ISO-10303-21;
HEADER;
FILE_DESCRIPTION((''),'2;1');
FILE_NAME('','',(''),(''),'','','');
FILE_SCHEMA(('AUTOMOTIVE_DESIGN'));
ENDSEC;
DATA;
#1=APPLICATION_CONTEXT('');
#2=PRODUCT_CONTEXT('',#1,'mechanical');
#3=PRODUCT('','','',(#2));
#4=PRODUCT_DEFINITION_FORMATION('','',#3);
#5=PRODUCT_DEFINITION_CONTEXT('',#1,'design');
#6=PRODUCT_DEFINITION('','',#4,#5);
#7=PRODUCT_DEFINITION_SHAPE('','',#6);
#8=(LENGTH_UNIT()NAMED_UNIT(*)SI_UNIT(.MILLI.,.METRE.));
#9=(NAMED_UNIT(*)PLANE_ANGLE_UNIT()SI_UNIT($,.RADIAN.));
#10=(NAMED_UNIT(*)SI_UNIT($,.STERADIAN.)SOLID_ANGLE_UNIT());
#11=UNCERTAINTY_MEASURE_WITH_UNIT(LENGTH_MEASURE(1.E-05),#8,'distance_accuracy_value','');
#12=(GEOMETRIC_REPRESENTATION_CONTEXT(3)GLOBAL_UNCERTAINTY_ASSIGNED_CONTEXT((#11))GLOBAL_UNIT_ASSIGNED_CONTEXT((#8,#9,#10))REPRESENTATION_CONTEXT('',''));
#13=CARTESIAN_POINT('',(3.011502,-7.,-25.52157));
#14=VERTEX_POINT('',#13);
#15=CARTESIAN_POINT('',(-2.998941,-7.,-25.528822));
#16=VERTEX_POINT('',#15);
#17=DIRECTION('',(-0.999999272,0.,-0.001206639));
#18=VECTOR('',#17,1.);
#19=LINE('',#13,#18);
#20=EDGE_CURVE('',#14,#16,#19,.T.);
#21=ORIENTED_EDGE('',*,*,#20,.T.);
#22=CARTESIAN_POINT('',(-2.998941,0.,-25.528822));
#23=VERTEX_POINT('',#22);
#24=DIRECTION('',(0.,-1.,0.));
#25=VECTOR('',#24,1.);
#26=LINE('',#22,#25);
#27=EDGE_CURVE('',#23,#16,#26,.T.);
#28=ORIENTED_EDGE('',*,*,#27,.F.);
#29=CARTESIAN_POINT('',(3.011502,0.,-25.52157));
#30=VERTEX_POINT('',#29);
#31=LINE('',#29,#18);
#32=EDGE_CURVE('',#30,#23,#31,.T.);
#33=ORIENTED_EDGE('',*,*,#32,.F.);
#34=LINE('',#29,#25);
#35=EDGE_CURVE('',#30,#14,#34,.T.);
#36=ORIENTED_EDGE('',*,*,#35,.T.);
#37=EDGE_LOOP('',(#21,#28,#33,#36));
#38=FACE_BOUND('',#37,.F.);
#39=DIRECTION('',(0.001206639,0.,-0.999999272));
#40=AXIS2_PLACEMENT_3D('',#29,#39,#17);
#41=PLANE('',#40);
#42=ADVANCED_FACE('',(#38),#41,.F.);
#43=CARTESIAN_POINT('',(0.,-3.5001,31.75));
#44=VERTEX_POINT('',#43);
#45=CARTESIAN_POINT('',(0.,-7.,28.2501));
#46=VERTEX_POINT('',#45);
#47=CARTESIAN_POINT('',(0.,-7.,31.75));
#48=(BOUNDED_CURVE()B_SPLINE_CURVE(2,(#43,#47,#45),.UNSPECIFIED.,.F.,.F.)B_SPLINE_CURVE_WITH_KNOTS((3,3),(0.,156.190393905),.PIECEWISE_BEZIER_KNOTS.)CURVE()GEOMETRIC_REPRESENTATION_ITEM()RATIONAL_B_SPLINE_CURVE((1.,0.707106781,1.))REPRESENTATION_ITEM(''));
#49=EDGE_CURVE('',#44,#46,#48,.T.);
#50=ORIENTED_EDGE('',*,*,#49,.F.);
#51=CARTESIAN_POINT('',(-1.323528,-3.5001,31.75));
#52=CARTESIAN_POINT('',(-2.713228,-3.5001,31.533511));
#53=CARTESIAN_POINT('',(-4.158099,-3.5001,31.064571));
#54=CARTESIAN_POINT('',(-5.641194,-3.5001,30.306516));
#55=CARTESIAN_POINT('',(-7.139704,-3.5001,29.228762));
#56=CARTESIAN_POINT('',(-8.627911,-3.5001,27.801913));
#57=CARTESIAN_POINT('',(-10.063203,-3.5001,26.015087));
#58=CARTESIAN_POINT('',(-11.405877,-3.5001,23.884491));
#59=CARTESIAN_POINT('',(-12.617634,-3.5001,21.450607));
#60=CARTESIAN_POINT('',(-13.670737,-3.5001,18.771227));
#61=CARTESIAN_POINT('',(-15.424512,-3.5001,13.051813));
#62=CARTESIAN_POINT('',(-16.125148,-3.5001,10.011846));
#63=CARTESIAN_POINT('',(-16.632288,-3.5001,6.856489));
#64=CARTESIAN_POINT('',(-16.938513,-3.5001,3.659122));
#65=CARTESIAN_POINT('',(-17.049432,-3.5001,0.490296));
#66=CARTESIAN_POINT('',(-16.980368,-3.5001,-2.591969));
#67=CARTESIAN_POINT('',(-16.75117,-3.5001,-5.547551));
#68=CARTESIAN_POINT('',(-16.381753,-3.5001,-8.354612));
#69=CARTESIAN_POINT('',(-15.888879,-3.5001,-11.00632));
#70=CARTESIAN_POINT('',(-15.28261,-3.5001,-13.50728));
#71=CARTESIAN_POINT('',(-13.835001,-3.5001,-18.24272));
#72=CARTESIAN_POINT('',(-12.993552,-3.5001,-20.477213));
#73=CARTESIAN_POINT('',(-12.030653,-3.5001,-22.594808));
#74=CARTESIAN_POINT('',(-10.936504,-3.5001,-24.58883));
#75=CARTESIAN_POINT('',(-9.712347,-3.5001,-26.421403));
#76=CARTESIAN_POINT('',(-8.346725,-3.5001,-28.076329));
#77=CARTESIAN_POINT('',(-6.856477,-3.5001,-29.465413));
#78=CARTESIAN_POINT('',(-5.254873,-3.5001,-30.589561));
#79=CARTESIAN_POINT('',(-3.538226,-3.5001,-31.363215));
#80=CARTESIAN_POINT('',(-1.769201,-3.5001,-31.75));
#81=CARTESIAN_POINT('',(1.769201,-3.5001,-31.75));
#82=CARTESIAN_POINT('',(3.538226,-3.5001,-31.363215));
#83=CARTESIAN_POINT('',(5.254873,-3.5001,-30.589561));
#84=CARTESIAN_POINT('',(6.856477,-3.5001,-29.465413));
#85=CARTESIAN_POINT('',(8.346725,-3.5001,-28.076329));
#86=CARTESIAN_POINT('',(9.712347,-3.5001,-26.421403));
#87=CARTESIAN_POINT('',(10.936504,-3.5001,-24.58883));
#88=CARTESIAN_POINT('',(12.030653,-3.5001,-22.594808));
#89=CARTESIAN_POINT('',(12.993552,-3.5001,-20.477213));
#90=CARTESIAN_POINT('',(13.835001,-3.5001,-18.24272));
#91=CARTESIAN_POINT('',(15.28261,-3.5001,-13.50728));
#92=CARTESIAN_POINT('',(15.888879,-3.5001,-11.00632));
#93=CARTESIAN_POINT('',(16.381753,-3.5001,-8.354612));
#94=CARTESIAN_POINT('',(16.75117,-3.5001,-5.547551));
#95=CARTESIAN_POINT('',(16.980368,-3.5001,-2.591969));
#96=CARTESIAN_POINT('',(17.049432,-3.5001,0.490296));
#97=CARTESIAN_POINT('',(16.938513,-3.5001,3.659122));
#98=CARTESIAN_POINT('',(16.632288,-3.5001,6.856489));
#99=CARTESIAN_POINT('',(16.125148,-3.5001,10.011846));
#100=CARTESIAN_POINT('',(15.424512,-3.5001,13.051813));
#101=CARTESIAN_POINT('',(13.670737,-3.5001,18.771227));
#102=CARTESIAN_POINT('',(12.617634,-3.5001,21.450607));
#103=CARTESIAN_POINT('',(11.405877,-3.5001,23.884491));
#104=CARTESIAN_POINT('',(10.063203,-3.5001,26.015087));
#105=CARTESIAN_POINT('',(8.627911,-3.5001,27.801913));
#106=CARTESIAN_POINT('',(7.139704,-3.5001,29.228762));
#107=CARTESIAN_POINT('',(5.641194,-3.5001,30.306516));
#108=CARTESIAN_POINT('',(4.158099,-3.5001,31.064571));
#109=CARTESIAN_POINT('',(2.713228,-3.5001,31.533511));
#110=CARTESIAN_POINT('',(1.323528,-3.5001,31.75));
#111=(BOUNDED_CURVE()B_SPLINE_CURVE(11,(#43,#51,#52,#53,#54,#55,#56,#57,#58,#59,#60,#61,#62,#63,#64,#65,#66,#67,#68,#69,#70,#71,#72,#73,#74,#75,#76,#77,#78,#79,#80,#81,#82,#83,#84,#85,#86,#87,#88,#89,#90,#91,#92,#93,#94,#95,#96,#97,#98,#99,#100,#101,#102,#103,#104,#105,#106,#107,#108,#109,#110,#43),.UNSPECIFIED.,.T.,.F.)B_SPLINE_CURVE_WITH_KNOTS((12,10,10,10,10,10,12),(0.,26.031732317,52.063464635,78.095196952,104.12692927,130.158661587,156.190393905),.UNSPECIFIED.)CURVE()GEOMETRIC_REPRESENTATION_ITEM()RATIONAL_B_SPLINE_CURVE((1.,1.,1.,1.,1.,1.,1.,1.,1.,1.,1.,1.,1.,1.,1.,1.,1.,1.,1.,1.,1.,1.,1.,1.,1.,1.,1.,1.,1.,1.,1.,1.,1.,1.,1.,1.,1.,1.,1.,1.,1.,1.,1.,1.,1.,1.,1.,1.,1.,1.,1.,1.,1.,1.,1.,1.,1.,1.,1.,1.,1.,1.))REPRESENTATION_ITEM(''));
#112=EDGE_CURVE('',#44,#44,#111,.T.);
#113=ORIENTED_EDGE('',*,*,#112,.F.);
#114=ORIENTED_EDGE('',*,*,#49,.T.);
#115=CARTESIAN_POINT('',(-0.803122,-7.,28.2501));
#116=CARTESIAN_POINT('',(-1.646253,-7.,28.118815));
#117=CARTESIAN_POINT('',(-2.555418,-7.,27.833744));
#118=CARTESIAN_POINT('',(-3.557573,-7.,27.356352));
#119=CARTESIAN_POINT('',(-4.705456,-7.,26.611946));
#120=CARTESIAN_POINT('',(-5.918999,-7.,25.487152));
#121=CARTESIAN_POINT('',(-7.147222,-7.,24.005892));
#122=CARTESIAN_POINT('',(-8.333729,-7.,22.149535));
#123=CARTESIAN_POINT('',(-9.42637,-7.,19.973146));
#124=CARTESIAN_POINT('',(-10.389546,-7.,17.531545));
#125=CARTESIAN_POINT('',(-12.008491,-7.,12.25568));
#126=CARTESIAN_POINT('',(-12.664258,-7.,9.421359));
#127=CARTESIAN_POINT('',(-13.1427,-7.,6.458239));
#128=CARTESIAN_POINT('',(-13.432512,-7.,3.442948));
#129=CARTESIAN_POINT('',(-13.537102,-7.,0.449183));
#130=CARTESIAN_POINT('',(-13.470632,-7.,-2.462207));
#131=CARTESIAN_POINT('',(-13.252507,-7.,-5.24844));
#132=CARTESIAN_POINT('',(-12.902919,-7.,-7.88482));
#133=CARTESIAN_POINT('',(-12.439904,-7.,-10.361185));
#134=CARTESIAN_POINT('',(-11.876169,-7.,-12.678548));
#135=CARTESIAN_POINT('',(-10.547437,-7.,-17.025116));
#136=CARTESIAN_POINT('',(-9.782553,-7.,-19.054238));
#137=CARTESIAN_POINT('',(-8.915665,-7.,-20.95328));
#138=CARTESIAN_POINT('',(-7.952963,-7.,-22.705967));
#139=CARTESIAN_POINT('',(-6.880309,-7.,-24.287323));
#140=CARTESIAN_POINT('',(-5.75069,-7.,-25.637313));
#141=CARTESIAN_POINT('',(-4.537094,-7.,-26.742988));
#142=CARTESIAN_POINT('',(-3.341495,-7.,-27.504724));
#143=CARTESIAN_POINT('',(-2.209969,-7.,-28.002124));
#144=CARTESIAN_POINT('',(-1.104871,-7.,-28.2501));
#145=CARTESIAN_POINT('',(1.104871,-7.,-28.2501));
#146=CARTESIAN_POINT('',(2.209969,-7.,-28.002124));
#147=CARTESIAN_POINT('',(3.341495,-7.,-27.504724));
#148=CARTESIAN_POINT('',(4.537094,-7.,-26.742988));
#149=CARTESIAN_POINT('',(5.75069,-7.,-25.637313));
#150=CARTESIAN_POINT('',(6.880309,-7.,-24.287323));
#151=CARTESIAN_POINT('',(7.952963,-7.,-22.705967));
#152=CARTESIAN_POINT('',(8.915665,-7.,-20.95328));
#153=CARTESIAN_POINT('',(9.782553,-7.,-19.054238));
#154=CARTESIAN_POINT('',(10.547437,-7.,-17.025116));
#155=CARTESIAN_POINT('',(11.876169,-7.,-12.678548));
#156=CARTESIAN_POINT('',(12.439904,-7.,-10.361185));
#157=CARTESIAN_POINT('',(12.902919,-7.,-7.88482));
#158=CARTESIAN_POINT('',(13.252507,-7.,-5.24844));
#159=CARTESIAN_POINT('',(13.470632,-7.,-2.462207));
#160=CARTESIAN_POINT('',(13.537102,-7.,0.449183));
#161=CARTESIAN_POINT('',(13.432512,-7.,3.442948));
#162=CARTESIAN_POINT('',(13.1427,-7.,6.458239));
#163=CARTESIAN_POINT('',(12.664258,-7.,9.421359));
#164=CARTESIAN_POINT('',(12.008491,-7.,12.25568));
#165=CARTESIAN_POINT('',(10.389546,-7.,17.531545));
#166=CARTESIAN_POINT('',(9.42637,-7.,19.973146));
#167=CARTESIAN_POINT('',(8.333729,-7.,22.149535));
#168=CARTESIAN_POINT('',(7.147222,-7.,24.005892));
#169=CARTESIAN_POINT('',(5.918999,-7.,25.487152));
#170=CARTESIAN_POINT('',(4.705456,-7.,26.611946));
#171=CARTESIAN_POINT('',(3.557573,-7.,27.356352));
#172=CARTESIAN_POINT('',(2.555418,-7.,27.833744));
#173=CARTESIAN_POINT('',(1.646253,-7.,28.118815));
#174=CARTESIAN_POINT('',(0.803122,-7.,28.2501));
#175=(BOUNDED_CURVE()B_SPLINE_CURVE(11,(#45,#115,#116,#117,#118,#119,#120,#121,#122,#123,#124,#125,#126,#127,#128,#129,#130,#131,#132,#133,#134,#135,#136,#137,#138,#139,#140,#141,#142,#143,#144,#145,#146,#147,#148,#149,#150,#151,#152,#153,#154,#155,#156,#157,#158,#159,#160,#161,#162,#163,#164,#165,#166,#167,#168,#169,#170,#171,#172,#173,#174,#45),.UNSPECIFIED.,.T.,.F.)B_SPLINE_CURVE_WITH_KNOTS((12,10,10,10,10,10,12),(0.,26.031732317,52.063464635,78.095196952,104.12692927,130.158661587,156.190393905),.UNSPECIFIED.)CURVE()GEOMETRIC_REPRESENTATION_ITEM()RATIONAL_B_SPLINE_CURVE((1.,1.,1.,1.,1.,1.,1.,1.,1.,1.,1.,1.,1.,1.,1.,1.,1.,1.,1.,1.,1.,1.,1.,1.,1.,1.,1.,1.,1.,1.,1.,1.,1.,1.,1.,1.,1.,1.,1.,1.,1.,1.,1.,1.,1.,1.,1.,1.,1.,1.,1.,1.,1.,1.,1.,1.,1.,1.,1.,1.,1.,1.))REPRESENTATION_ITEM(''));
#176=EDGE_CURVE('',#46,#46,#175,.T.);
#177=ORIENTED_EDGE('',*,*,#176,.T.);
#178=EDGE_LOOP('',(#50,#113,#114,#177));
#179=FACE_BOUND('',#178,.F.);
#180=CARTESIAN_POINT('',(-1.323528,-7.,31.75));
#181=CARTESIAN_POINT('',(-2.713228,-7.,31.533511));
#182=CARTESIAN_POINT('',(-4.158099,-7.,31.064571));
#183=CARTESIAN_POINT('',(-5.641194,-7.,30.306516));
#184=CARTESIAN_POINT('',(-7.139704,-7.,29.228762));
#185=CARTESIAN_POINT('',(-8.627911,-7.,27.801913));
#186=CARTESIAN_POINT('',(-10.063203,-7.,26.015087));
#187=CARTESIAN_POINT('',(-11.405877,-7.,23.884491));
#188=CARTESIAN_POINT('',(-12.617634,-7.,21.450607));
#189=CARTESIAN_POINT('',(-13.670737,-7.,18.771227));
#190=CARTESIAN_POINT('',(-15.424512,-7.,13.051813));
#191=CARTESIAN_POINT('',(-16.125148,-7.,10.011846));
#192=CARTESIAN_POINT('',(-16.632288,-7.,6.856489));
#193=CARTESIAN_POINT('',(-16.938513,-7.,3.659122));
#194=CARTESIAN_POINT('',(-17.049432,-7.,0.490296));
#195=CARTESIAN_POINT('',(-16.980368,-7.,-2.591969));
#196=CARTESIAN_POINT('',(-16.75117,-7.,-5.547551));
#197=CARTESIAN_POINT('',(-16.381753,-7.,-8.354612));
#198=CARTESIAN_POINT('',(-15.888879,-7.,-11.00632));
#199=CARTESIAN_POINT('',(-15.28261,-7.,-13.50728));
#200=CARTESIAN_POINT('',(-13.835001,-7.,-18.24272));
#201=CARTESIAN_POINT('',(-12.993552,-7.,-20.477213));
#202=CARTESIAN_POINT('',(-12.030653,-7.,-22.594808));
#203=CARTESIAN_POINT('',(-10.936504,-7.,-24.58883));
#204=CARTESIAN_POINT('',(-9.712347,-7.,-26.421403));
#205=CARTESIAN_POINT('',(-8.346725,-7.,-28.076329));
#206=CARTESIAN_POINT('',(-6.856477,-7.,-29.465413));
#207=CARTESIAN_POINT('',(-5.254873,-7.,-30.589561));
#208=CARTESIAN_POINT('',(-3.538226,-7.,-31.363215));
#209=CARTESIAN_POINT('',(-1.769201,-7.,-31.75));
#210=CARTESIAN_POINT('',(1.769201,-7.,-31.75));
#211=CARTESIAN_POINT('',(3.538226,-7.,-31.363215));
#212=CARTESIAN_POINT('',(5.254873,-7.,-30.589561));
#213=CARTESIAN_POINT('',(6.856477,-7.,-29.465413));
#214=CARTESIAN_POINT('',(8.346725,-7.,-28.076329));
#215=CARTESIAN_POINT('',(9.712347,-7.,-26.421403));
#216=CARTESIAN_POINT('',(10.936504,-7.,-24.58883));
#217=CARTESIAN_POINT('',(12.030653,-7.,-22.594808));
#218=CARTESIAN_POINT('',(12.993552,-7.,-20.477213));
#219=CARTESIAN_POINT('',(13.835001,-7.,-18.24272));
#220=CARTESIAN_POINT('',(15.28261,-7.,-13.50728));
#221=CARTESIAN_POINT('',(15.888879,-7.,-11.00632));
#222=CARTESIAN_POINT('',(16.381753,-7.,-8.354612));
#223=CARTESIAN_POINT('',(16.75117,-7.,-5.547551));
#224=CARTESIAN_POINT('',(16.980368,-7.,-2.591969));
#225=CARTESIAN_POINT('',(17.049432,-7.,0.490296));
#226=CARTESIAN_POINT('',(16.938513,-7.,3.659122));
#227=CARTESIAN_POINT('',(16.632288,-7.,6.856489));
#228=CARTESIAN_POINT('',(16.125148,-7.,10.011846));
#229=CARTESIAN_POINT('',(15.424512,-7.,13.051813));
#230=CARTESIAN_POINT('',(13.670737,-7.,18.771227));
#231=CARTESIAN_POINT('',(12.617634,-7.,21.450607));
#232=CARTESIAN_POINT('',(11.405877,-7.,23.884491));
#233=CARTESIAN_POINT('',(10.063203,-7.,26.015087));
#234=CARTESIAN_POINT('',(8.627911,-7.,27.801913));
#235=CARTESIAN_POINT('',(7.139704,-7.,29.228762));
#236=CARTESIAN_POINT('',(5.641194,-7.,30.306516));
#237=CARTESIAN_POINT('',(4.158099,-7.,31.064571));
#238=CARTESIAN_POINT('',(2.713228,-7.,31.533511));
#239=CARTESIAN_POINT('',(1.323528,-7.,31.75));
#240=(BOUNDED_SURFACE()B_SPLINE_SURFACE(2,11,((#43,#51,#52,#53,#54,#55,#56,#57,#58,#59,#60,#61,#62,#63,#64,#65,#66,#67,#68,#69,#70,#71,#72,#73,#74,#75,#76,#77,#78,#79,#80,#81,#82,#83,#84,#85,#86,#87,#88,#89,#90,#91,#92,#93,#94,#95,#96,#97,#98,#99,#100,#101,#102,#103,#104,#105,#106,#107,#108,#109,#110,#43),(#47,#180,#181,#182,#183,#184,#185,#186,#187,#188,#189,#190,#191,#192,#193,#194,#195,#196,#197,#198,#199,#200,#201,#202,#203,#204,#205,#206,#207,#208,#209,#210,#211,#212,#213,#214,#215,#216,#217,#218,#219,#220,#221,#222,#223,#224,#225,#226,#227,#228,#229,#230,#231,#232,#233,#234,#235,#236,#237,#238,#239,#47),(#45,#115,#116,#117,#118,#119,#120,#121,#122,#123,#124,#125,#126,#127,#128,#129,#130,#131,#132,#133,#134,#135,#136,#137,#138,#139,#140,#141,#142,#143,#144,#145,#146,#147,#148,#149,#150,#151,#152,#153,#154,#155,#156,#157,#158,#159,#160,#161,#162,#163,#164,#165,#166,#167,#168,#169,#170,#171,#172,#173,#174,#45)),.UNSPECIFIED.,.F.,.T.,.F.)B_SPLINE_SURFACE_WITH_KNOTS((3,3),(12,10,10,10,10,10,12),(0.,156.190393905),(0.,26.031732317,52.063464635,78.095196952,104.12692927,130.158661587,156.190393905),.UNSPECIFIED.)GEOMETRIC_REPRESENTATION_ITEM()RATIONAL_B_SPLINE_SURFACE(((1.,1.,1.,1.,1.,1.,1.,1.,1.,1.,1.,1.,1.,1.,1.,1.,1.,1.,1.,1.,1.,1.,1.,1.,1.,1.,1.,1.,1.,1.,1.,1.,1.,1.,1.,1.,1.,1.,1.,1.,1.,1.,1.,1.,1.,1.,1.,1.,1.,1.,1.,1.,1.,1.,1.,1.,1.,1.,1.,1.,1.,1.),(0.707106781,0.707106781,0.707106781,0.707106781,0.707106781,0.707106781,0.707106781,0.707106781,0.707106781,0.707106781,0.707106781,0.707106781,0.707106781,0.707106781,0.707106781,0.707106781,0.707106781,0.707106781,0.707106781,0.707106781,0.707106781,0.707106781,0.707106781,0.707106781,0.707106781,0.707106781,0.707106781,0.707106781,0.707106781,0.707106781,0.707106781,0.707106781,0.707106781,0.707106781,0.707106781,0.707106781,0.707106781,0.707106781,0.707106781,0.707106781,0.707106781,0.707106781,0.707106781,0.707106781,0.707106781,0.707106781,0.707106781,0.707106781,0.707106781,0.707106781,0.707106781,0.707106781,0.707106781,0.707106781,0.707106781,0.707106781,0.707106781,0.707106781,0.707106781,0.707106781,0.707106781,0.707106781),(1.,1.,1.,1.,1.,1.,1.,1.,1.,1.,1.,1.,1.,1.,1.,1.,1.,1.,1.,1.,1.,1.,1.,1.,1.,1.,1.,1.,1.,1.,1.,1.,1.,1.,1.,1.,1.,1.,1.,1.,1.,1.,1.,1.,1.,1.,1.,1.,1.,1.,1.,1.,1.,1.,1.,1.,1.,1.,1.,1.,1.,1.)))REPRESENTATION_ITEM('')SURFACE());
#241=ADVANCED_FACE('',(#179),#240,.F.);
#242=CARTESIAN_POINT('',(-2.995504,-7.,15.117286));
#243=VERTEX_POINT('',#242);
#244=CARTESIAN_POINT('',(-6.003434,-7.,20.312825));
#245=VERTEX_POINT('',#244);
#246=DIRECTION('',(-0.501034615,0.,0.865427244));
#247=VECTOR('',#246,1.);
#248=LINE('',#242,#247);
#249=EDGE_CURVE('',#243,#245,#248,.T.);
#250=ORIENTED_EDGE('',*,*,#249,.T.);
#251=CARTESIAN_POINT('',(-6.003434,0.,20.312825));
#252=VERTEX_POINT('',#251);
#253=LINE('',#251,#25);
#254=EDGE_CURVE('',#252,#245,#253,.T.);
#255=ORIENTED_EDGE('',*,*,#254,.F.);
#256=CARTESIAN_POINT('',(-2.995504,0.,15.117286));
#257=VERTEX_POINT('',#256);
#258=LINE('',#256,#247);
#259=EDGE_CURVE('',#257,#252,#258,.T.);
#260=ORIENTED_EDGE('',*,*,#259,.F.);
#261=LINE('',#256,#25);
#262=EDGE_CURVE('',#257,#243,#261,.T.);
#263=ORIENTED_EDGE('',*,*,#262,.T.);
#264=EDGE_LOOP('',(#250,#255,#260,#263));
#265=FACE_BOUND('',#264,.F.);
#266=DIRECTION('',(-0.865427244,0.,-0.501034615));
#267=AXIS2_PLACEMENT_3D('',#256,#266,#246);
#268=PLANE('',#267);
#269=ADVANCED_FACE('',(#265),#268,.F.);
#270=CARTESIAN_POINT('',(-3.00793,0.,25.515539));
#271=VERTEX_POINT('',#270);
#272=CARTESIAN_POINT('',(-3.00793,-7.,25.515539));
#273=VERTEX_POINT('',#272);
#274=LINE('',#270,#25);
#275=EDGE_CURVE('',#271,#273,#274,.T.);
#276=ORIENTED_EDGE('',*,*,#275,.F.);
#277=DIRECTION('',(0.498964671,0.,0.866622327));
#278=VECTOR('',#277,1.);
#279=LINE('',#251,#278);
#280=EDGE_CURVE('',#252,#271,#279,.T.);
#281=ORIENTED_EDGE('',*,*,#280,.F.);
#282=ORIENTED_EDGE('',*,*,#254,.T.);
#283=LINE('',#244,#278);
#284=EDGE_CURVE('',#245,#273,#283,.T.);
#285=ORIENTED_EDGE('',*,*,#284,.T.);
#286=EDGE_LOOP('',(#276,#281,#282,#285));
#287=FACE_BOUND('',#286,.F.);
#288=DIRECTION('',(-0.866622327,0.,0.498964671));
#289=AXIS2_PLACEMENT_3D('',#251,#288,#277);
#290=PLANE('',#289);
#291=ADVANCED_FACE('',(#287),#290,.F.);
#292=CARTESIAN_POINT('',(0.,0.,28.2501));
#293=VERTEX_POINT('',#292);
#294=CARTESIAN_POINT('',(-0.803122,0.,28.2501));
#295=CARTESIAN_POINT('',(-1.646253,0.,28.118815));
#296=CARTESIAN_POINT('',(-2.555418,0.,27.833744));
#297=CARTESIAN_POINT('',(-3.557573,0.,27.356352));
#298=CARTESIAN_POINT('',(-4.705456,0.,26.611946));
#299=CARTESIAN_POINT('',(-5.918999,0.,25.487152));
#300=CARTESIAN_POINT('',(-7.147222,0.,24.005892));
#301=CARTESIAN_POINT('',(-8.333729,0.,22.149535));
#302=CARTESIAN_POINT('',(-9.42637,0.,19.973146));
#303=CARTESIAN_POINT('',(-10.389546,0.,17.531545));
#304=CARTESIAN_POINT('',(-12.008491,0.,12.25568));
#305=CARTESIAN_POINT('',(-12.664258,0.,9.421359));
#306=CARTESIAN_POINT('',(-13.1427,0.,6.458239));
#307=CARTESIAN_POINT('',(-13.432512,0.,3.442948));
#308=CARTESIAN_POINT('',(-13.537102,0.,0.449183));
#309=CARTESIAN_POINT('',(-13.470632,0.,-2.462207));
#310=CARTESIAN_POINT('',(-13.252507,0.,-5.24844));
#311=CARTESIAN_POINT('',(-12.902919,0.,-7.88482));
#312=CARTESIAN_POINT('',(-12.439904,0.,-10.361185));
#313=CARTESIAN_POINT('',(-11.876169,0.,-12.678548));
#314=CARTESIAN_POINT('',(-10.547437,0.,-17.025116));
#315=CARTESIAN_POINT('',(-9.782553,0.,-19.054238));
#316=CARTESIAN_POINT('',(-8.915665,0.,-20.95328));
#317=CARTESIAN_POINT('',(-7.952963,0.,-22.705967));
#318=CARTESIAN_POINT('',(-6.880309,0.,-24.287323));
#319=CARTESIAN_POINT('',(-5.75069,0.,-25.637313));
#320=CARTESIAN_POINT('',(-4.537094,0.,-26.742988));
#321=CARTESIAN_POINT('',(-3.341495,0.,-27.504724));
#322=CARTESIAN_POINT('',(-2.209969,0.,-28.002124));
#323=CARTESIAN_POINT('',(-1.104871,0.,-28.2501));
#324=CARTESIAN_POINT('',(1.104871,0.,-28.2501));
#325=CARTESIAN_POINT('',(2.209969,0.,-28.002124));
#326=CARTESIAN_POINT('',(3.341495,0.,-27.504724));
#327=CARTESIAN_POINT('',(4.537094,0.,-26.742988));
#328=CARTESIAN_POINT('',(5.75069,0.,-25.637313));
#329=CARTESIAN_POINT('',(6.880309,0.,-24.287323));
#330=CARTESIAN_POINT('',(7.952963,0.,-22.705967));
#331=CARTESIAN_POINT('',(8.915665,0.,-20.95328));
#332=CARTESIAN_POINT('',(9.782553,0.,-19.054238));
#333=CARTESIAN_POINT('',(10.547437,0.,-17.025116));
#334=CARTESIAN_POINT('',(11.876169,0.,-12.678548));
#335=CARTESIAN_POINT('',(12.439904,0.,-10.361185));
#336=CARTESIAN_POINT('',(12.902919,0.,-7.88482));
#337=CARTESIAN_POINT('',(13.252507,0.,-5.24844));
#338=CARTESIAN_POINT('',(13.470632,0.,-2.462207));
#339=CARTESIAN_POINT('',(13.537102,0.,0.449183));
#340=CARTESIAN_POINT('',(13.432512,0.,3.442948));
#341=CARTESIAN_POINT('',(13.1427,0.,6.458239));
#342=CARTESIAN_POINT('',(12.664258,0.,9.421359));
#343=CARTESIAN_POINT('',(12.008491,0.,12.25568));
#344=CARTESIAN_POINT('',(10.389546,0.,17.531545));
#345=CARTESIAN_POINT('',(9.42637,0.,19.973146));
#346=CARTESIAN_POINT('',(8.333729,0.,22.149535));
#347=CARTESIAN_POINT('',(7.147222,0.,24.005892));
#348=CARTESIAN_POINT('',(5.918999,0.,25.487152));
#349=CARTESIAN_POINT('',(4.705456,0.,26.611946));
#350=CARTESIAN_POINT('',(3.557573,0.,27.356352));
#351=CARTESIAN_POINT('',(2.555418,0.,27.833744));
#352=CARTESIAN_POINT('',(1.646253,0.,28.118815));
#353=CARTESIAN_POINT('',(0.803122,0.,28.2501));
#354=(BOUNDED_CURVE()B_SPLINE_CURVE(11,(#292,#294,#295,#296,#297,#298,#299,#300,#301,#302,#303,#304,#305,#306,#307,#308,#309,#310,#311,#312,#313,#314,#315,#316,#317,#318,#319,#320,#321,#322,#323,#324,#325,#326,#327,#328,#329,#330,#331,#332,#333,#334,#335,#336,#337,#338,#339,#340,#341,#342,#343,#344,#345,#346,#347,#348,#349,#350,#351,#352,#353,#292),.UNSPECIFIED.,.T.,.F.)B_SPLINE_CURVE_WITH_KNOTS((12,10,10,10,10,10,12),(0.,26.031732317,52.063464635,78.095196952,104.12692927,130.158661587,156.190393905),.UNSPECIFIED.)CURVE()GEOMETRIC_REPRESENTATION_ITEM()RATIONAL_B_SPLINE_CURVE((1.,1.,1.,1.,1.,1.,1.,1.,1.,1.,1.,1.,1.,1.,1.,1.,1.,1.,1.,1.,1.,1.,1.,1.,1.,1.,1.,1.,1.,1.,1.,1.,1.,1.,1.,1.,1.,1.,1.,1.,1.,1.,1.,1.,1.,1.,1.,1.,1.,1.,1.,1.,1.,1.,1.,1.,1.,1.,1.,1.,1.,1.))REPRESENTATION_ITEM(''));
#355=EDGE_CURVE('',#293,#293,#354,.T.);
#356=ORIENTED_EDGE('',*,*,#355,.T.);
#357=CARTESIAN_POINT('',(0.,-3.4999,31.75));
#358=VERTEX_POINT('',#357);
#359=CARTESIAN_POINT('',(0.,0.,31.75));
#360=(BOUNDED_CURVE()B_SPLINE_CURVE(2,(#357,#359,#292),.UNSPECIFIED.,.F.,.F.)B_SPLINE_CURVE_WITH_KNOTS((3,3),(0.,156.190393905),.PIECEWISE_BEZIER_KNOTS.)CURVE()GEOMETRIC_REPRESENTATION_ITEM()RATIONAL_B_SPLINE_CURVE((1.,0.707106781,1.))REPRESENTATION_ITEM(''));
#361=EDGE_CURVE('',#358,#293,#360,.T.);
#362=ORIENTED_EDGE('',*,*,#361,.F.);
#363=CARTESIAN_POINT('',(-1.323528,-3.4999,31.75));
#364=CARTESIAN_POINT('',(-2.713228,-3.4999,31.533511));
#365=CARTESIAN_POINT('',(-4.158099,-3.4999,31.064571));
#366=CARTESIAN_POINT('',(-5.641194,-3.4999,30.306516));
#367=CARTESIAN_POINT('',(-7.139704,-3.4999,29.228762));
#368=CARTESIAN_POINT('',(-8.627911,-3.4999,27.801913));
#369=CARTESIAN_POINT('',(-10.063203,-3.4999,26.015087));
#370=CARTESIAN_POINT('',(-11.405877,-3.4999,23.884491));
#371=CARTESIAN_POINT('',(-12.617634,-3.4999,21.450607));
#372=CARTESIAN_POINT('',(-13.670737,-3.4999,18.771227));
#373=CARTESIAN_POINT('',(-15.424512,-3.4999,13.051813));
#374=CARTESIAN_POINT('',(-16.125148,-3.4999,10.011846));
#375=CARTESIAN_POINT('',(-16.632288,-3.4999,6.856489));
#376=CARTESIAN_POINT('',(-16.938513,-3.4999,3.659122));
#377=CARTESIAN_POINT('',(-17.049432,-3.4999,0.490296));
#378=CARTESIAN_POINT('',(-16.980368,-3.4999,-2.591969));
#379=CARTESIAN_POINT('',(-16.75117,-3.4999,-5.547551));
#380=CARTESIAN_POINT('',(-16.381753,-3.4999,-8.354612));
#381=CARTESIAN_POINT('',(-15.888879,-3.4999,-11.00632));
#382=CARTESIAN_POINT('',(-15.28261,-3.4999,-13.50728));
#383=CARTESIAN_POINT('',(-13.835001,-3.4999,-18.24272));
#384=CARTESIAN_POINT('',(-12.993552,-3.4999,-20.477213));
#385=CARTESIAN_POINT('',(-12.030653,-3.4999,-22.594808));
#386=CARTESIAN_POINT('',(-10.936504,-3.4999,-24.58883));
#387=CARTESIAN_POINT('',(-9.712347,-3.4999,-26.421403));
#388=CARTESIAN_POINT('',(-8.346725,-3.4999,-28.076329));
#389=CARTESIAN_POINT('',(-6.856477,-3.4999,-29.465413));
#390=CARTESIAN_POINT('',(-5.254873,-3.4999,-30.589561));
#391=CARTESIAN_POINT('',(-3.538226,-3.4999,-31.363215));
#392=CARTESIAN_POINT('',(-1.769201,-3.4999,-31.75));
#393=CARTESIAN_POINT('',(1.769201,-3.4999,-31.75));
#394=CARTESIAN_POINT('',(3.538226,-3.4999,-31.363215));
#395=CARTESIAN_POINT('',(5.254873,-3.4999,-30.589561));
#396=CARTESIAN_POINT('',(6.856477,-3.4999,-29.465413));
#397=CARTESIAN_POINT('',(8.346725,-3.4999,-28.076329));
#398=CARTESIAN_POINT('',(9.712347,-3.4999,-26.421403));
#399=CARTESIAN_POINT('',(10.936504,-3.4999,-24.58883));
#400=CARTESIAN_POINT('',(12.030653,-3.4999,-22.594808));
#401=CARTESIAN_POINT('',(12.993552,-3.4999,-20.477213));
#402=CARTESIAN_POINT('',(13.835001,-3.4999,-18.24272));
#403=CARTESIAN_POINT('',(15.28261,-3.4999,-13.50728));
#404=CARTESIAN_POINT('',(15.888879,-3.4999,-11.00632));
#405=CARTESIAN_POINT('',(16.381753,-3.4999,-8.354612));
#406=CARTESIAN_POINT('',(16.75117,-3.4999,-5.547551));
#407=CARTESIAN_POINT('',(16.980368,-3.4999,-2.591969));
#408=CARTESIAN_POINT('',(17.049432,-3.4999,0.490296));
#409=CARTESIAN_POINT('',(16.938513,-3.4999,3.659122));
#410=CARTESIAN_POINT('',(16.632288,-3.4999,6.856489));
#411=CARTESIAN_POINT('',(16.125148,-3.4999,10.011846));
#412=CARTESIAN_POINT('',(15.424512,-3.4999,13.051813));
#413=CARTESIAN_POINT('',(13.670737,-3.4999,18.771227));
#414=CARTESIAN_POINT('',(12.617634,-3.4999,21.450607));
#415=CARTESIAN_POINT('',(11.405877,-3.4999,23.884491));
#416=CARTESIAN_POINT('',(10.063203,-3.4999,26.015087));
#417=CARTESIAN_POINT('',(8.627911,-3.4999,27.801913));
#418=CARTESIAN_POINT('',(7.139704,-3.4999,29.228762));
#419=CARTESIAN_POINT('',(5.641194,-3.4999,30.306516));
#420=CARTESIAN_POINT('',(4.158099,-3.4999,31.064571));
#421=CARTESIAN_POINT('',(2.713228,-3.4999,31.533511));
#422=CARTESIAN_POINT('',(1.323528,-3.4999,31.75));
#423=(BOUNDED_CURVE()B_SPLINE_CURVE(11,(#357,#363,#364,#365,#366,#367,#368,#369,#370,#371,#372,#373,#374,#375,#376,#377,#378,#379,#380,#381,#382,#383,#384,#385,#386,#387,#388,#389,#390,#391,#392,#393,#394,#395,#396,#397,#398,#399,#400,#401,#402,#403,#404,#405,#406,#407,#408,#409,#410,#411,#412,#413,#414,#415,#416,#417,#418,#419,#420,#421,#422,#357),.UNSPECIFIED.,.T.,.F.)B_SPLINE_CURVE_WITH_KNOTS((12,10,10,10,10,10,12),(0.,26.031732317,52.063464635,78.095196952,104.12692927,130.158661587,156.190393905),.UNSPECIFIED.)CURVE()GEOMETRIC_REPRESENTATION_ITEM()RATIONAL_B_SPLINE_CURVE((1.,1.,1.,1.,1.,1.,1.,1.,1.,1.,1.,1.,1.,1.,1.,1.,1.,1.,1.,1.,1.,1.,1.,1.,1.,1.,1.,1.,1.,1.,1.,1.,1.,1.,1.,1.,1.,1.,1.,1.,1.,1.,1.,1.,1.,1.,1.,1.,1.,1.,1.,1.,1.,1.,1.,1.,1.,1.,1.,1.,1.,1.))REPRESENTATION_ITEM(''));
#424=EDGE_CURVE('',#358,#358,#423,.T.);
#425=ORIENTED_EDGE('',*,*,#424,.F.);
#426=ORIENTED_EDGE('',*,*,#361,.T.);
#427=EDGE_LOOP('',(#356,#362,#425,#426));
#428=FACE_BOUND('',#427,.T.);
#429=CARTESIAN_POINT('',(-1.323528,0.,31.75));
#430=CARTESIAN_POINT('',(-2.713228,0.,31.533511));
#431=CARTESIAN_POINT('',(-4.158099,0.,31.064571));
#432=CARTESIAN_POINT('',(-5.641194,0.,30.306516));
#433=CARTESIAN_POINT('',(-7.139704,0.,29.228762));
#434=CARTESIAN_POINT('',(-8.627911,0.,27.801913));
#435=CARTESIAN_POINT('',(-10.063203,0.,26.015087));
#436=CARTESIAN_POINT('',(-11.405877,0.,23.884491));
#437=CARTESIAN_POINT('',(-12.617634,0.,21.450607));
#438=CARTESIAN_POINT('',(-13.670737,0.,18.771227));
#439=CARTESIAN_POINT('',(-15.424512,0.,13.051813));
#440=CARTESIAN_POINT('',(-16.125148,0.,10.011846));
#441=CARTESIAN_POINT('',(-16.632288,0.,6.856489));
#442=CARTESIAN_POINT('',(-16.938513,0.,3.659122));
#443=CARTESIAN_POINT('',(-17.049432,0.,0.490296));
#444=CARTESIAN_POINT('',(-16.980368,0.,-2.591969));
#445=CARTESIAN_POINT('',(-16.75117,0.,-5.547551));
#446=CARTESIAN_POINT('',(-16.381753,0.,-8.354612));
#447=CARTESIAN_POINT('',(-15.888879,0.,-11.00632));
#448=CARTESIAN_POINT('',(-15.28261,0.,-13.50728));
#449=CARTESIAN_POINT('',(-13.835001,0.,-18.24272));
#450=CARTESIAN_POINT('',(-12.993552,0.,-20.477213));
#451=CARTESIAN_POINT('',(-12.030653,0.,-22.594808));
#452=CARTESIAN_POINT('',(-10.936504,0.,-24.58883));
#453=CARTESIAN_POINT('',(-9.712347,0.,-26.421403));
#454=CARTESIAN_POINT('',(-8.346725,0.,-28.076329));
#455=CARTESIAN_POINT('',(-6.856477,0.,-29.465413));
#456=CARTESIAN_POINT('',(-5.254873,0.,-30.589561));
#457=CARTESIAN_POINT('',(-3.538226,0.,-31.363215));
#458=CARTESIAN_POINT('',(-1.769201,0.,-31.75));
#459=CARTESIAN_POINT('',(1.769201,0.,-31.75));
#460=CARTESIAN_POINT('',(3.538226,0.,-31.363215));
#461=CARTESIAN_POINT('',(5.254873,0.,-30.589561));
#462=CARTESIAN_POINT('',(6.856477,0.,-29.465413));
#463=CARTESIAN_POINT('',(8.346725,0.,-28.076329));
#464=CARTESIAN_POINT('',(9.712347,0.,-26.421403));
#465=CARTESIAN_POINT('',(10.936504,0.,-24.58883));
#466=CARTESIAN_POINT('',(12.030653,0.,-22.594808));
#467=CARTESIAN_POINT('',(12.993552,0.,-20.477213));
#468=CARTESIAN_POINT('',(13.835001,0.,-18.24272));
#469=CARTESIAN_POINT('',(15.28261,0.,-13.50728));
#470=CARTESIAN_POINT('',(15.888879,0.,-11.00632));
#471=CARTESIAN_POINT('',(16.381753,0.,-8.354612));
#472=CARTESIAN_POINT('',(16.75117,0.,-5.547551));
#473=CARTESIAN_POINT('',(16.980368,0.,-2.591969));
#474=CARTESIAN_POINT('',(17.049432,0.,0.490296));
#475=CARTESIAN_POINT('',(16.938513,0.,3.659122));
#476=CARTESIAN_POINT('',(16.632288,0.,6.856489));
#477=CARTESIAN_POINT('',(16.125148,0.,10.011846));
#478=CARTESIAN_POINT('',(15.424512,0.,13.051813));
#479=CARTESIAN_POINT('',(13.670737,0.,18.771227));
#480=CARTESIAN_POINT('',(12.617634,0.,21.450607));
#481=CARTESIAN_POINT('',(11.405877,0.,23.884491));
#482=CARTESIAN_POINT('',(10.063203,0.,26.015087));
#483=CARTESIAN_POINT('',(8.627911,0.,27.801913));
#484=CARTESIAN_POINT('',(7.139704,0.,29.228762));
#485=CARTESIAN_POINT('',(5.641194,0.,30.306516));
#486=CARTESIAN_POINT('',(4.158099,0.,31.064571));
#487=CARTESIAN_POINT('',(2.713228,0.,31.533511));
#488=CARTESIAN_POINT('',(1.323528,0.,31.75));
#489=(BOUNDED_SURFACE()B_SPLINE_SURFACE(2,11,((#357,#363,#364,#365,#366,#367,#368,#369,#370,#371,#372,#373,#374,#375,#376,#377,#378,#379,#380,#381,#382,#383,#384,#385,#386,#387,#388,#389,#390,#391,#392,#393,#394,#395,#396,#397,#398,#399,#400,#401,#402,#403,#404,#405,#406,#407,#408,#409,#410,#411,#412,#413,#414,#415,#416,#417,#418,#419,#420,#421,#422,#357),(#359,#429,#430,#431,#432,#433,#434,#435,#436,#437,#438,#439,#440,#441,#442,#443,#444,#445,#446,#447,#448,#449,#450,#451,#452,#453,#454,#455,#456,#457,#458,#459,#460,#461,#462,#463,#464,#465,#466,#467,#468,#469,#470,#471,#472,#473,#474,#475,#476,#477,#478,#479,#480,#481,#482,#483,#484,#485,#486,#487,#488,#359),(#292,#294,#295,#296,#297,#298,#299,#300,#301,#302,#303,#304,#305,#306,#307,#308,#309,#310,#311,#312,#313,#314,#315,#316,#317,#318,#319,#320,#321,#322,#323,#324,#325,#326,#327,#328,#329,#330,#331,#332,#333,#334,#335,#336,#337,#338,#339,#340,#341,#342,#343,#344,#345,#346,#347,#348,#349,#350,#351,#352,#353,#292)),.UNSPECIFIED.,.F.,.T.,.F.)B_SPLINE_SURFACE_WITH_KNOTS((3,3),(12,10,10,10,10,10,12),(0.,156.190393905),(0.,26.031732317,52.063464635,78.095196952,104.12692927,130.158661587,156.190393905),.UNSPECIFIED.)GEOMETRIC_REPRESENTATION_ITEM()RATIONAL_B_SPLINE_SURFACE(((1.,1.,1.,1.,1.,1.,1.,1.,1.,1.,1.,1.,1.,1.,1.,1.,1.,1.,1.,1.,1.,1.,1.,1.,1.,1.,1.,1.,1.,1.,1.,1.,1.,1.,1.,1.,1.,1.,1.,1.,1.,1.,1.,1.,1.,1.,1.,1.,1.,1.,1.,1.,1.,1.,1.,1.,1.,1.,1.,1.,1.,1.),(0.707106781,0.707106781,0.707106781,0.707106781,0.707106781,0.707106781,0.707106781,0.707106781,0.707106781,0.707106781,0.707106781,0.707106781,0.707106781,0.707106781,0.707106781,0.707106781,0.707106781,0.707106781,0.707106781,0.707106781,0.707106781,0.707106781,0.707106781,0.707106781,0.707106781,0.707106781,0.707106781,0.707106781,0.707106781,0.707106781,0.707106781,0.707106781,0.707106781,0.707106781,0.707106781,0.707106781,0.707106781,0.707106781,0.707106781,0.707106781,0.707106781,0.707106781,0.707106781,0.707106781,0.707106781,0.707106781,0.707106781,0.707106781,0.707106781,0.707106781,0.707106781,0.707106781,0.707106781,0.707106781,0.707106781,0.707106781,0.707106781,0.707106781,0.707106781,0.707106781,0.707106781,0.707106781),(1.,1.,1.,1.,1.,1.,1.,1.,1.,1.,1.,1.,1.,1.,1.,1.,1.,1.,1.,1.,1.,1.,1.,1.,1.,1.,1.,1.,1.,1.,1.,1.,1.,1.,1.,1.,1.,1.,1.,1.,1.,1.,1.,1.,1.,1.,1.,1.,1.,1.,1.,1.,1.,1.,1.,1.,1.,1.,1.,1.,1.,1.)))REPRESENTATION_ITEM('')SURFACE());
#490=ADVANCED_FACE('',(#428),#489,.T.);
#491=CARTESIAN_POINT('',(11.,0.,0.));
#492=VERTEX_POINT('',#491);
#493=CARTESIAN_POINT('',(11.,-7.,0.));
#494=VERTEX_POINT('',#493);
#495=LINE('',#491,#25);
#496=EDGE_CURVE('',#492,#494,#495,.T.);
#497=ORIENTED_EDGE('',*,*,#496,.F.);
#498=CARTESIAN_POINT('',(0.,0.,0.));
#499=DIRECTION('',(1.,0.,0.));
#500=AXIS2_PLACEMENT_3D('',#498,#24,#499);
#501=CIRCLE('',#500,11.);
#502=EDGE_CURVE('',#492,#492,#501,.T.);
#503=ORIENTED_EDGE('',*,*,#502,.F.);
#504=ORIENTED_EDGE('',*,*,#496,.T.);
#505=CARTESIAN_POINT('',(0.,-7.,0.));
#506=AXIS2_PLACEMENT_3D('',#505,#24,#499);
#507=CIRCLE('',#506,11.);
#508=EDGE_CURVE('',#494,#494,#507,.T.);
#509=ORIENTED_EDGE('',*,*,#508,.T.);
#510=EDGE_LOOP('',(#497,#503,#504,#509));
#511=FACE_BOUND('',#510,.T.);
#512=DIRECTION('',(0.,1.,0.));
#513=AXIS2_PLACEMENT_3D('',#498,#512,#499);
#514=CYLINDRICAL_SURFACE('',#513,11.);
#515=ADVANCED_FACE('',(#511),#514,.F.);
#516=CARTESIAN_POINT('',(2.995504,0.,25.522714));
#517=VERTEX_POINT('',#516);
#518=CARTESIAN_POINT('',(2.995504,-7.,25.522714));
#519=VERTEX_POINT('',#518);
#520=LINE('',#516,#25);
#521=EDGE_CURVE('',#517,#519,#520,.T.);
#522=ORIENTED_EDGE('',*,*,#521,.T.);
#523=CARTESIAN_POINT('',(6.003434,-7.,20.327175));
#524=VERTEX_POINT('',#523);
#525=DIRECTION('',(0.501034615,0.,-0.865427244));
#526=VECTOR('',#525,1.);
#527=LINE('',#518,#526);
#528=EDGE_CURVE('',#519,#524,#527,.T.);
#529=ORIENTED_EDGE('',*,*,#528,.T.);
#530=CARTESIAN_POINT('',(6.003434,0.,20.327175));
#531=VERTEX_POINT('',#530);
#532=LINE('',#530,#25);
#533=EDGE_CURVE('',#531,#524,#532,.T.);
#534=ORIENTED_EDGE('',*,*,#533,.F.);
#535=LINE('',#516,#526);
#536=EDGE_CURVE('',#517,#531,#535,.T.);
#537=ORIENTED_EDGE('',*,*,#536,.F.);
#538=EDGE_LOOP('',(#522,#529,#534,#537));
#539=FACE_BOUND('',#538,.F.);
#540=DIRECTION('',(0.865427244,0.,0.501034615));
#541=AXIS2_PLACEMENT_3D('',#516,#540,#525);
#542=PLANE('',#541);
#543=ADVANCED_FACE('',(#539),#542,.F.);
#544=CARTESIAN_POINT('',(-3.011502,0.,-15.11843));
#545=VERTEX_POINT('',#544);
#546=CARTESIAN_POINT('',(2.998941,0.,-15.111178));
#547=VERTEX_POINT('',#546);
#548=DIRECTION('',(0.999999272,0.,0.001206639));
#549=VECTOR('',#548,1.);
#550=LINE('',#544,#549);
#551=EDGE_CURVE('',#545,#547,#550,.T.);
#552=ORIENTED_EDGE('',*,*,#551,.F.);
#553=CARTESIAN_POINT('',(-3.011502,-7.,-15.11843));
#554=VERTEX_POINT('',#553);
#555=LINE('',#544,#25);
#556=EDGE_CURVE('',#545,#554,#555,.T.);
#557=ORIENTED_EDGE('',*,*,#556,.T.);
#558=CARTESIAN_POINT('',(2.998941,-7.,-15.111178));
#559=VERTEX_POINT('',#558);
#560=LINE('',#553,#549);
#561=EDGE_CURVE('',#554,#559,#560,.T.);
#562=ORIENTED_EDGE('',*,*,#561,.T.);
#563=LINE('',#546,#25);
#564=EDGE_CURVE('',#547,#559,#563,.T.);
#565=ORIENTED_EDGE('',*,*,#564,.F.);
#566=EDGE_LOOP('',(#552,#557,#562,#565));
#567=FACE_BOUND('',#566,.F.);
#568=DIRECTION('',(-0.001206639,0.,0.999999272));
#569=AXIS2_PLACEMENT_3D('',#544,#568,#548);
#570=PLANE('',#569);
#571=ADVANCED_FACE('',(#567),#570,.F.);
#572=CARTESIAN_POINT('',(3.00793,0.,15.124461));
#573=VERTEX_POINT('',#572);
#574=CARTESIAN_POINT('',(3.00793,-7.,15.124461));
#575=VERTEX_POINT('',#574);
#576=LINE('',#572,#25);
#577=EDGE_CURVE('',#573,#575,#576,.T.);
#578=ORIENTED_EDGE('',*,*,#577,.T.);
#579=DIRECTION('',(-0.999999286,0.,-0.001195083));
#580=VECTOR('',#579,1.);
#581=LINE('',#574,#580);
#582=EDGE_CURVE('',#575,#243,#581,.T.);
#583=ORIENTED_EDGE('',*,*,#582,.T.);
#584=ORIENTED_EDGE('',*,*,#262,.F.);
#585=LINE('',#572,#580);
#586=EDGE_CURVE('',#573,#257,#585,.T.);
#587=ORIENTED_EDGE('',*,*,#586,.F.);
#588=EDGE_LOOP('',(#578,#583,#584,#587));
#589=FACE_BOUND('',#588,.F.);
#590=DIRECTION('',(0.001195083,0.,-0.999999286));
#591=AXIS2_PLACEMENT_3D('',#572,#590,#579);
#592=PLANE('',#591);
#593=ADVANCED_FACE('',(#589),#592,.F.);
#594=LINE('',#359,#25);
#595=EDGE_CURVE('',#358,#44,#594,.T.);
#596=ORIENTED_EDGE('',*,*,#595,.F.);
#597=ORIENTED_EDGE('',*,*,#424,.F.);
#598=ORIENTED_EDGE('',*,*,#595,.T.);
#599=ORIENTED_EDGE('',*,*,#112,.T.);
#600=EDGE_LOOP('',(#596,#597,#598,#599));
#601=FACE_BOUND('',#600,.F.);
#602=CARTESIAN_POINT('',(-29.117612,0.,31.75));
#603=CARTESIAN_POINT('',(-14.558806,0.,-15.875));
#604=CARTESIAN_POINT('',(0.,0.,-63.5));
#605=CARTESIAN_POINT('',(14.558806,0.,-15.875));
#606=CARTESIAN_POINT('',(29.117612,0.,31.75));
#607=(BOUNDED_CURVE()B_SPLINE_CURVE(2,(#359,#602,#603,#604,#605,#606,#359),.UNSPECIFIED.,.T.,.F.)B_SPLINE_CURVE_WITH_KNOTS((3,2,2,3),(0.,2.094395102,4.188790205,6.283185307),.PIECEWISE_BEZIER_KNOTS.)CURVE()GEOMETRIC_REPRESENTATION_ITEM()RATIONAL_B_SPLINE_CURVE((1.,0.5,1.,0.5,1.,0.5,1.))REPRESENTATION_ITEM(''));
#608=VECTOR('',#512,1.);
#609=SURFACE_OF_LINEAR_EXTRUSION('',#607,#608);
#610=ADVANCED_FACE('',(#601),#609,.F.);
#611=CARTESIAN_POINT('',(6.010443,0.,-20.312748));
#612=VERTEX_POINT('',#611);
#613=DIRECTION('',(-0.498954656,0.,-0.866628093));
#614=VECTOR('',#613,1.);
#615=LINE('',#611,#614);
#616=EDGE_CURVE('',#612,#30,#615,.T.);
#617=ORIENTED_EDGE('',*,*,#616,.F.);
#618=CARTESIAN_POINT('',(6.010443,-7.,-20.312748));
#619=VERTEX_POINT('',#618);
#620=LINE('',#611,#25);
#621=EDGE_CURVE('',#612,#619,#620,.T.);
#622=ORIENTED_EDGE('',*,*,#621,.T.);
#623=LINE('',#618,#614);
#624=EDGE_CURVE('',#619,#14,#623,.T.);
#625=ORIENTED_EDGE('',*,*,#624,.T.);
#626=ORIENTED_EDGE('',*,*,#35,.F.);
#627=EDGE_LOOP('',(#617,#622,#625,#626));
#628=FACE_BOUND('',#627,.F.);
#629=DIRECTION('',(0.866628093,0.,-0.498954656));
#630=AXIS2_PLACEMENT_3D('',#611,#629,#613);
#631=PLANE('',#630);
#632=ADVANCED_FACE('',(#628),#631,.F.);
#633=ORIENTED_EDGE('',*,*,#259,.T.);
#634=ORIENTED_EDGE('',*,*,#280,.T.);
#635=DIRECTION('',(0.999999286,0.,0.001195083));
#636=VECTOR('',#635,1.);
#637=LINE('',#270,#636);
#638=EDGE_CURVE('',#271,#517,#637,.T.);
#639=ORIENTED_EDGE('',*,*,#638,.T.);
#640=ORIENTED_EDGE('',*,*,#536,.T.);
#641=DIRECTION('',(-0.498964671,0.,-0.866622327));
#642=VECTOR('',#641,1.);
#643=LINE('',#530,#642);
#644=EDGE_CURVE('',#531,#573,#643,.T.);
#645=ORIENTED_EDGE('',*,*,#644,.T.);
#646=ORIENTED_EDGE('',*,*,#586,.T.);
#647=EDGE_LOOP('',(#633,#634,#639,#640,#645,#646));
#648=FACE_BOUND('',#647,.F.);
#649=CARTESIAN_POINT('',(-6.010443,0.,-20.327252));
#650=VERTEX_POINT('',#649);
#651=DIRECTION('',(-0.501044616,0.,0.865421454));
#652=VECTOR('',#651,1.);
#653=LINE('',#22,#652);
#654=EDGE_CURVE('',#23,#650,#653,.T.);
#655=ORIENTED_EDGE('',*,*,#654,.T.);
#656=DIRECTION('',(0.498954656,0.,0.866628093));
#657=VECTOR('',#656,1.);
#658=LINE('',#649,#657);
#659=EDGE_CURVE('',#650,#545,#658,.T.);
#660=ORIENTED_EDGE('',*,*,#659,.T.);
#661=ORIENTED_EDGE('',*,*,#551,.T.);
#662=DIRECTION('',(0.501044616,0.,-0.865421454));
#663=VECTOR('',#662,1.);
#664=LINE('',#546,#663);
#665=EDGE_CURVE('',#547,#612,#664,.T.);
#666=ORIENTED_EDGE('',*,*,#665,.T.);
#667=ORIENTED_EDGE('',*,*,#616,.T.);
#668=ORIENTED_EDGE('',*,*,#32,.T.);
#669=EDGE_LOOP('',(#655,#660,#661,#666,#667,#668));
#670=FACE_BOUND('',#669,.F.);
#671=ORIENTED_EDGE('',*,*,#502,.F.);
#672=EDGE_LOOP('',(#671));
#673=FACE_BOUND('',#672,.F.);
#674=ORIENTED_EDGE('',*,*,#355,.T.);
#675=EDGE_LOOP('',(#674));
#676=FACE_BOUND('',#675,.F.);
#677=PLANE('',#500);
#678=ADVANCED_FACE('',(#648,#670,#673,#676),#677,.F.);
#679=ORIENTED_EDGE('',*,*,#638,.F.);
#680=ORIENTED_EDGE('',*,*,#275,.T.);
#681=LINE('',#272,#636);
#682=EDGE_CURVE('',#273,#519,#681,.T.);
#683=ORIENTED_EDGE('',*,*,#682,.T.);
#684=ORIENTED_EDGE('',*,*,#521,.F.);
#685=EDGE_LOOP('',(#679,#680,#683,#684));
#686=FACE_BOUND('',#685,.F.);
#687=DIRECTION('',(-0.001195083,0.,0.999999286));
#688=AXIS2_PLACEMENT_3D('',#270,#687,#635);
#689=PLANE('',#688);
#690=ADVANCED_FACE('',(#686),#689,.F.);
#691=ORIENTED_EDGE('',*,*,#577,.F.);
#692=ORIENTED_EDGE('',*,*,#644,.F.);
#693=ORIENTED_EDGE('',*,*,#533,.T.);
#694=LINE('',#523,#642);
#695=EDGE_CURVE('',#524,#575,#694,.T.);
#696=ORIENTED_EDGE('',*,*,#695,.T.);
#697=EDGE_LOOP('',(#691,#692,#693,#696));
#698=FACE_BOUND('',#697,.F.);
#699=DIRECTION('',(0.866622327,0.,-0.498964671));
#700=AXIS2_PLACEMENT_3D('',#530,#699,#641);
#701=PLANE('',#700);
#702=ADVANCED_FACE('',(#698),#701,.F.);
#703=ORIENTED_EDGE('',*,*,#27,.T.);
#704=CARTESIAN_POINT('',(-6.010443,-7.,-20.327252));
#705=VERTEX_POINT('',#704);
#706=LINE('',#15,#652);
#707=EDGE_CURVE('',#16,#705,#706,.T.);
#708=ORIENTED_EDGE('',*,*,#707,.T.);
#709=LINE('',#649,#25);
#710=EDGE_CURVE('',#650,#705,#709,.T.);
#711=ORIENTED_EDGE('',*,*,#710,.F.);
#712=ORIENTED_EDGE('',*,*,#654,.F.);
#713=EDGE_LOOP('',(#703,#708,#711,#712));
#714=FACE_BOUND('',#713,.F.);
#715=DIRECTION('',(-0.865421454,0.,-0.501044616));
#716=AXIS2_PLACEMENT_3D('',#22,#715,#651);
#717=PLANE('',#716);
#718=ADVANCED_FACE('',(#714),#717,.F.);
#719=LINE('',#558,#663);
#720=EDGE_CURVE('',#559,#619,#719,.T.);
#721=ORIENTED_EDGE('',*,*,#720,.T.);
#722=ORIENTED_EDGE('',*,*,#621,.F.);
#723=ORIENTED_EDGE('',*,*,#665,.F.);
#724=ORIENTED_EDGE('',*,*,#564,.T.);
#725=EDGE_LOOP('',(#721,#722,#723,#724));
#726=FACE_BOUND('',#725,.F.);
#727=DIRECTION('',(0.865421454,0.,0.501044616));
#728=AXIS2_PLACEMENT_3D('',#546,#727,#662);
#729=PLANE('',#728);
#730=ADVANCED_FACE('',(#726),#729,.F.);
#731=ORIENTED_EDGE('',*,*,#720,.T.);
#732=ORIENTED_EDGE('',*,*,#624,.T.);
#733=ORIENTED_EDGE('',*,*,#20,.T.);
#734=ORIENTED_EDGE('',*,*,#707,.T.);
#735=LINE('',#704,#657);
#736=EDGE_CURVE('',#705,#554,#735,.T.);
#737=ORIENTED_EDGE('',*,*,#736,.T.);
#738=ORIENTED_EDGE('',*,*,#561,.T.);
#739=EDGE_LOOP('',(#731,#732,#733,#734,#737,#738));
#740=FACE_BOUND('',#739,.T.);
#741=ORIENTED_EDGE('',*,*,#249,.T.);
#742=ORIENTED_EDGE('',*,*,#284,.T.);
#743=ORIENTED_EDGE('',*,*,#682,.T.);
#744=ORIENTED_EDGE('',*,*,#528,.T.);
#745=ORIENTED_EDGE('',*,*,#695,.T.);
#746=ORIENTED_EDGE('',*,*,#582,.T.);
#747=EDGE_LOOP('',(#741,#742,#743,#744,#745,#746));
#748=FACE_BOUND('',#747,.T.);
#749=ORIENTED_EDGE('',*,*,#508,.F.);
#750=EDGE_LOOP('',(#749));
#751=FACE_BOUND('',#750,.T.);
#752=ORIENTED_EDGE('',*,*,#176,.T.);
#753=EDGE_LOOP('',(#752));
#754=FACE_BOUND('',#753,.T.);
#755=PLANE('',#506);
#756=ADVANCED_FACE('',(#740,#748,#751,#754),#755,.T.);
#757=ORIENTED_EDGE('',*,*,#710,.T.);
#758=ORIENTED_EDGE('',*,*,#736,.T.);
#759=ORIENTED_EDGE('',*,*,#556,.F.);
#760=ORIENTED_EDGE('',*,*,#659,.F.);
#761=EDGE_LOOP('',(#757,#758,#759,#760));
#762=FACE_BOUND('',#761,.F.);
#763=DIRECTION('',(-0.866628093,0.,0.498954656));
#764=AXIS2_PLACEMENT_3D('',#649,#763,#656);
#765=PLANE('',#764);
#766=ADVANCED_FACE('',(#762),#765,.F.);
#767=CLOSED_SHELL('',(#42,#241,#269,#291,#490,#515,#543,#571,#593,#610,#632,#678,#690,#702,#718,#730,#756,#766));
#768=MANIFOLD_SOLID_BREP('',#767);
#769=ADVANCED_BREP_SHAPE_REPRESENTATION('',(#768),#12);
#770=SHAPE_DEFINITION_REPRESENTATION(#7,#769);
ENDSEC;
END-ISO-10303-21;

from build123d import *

# Parameters (mm, degrees)
F0_R     = 11
F1_DEPTH = 7
F2_R     = 3.4999


# Not quite as in the source:
# - a fillet or chamfer is up to 0.001 mm smaller than in the source, because OpenCascade refuses the exact size


with BuildPart() as f1:
    # F0 (on Front) → F1 (new body)
    with BuildSketch(Plane.XZ):
        with BuildLine():
            add(Edge.make_bspline(
                [(0, 31.75), (-29.1176115239, 31.75), (-14.558805762, -15.875), (0, -63.5), (14.558805762, -15.875), (29.1176115239, 31.75), (0, 31.75)],
                knots=[0, 0, 0, 2.0943951024, 2.0943951024, 4.1887902048, 4.1887902048, 6.2831853072, 6.2831853072, 6.2831853072], degree=2, weights=[1, 0.5, 1, 0.5, 1, 0.5, 1]))
        make_face()
        Polygon((2.9989406364, -15.1111775695), (6.0104428668, -20.3127475603), (3.0115022304, -25.5215699908), (-2.9989406364, -25.5288224305), (-6.0104428668, -20.3272524397), (-3.0115022304, -15.1184300092), align=None, mode=Mode.SUBTRACT)
        Circle(F0_R, mode=Mode.SUBTRACT)
        Polygon((2.9955036613, 25.5227137441), (6.0034341016, 20.3271746042), (3.0079304403, 15.1244608602), (-2.9955036613, 15.1172862559), (-6.0034341016, 20.3128253958), (-3.0079304403, 25.5155391398), align=None, mode=Mode.SUBTRACT)
    extrude(amount=F1_DEPTH)

    # F2 (radius 3.5 in the source; OpenCascade refuses exactly that, so slightly less here)
    f2_edges = [f1.edges().sort_by_distance(p)[0] for p in [
        (-2e-06, -7, -31.75),
        (-2e-06, 0, -31.75),
    ]]
    fillet(f2_edges, radius=F2_R)


solid = f1.part
